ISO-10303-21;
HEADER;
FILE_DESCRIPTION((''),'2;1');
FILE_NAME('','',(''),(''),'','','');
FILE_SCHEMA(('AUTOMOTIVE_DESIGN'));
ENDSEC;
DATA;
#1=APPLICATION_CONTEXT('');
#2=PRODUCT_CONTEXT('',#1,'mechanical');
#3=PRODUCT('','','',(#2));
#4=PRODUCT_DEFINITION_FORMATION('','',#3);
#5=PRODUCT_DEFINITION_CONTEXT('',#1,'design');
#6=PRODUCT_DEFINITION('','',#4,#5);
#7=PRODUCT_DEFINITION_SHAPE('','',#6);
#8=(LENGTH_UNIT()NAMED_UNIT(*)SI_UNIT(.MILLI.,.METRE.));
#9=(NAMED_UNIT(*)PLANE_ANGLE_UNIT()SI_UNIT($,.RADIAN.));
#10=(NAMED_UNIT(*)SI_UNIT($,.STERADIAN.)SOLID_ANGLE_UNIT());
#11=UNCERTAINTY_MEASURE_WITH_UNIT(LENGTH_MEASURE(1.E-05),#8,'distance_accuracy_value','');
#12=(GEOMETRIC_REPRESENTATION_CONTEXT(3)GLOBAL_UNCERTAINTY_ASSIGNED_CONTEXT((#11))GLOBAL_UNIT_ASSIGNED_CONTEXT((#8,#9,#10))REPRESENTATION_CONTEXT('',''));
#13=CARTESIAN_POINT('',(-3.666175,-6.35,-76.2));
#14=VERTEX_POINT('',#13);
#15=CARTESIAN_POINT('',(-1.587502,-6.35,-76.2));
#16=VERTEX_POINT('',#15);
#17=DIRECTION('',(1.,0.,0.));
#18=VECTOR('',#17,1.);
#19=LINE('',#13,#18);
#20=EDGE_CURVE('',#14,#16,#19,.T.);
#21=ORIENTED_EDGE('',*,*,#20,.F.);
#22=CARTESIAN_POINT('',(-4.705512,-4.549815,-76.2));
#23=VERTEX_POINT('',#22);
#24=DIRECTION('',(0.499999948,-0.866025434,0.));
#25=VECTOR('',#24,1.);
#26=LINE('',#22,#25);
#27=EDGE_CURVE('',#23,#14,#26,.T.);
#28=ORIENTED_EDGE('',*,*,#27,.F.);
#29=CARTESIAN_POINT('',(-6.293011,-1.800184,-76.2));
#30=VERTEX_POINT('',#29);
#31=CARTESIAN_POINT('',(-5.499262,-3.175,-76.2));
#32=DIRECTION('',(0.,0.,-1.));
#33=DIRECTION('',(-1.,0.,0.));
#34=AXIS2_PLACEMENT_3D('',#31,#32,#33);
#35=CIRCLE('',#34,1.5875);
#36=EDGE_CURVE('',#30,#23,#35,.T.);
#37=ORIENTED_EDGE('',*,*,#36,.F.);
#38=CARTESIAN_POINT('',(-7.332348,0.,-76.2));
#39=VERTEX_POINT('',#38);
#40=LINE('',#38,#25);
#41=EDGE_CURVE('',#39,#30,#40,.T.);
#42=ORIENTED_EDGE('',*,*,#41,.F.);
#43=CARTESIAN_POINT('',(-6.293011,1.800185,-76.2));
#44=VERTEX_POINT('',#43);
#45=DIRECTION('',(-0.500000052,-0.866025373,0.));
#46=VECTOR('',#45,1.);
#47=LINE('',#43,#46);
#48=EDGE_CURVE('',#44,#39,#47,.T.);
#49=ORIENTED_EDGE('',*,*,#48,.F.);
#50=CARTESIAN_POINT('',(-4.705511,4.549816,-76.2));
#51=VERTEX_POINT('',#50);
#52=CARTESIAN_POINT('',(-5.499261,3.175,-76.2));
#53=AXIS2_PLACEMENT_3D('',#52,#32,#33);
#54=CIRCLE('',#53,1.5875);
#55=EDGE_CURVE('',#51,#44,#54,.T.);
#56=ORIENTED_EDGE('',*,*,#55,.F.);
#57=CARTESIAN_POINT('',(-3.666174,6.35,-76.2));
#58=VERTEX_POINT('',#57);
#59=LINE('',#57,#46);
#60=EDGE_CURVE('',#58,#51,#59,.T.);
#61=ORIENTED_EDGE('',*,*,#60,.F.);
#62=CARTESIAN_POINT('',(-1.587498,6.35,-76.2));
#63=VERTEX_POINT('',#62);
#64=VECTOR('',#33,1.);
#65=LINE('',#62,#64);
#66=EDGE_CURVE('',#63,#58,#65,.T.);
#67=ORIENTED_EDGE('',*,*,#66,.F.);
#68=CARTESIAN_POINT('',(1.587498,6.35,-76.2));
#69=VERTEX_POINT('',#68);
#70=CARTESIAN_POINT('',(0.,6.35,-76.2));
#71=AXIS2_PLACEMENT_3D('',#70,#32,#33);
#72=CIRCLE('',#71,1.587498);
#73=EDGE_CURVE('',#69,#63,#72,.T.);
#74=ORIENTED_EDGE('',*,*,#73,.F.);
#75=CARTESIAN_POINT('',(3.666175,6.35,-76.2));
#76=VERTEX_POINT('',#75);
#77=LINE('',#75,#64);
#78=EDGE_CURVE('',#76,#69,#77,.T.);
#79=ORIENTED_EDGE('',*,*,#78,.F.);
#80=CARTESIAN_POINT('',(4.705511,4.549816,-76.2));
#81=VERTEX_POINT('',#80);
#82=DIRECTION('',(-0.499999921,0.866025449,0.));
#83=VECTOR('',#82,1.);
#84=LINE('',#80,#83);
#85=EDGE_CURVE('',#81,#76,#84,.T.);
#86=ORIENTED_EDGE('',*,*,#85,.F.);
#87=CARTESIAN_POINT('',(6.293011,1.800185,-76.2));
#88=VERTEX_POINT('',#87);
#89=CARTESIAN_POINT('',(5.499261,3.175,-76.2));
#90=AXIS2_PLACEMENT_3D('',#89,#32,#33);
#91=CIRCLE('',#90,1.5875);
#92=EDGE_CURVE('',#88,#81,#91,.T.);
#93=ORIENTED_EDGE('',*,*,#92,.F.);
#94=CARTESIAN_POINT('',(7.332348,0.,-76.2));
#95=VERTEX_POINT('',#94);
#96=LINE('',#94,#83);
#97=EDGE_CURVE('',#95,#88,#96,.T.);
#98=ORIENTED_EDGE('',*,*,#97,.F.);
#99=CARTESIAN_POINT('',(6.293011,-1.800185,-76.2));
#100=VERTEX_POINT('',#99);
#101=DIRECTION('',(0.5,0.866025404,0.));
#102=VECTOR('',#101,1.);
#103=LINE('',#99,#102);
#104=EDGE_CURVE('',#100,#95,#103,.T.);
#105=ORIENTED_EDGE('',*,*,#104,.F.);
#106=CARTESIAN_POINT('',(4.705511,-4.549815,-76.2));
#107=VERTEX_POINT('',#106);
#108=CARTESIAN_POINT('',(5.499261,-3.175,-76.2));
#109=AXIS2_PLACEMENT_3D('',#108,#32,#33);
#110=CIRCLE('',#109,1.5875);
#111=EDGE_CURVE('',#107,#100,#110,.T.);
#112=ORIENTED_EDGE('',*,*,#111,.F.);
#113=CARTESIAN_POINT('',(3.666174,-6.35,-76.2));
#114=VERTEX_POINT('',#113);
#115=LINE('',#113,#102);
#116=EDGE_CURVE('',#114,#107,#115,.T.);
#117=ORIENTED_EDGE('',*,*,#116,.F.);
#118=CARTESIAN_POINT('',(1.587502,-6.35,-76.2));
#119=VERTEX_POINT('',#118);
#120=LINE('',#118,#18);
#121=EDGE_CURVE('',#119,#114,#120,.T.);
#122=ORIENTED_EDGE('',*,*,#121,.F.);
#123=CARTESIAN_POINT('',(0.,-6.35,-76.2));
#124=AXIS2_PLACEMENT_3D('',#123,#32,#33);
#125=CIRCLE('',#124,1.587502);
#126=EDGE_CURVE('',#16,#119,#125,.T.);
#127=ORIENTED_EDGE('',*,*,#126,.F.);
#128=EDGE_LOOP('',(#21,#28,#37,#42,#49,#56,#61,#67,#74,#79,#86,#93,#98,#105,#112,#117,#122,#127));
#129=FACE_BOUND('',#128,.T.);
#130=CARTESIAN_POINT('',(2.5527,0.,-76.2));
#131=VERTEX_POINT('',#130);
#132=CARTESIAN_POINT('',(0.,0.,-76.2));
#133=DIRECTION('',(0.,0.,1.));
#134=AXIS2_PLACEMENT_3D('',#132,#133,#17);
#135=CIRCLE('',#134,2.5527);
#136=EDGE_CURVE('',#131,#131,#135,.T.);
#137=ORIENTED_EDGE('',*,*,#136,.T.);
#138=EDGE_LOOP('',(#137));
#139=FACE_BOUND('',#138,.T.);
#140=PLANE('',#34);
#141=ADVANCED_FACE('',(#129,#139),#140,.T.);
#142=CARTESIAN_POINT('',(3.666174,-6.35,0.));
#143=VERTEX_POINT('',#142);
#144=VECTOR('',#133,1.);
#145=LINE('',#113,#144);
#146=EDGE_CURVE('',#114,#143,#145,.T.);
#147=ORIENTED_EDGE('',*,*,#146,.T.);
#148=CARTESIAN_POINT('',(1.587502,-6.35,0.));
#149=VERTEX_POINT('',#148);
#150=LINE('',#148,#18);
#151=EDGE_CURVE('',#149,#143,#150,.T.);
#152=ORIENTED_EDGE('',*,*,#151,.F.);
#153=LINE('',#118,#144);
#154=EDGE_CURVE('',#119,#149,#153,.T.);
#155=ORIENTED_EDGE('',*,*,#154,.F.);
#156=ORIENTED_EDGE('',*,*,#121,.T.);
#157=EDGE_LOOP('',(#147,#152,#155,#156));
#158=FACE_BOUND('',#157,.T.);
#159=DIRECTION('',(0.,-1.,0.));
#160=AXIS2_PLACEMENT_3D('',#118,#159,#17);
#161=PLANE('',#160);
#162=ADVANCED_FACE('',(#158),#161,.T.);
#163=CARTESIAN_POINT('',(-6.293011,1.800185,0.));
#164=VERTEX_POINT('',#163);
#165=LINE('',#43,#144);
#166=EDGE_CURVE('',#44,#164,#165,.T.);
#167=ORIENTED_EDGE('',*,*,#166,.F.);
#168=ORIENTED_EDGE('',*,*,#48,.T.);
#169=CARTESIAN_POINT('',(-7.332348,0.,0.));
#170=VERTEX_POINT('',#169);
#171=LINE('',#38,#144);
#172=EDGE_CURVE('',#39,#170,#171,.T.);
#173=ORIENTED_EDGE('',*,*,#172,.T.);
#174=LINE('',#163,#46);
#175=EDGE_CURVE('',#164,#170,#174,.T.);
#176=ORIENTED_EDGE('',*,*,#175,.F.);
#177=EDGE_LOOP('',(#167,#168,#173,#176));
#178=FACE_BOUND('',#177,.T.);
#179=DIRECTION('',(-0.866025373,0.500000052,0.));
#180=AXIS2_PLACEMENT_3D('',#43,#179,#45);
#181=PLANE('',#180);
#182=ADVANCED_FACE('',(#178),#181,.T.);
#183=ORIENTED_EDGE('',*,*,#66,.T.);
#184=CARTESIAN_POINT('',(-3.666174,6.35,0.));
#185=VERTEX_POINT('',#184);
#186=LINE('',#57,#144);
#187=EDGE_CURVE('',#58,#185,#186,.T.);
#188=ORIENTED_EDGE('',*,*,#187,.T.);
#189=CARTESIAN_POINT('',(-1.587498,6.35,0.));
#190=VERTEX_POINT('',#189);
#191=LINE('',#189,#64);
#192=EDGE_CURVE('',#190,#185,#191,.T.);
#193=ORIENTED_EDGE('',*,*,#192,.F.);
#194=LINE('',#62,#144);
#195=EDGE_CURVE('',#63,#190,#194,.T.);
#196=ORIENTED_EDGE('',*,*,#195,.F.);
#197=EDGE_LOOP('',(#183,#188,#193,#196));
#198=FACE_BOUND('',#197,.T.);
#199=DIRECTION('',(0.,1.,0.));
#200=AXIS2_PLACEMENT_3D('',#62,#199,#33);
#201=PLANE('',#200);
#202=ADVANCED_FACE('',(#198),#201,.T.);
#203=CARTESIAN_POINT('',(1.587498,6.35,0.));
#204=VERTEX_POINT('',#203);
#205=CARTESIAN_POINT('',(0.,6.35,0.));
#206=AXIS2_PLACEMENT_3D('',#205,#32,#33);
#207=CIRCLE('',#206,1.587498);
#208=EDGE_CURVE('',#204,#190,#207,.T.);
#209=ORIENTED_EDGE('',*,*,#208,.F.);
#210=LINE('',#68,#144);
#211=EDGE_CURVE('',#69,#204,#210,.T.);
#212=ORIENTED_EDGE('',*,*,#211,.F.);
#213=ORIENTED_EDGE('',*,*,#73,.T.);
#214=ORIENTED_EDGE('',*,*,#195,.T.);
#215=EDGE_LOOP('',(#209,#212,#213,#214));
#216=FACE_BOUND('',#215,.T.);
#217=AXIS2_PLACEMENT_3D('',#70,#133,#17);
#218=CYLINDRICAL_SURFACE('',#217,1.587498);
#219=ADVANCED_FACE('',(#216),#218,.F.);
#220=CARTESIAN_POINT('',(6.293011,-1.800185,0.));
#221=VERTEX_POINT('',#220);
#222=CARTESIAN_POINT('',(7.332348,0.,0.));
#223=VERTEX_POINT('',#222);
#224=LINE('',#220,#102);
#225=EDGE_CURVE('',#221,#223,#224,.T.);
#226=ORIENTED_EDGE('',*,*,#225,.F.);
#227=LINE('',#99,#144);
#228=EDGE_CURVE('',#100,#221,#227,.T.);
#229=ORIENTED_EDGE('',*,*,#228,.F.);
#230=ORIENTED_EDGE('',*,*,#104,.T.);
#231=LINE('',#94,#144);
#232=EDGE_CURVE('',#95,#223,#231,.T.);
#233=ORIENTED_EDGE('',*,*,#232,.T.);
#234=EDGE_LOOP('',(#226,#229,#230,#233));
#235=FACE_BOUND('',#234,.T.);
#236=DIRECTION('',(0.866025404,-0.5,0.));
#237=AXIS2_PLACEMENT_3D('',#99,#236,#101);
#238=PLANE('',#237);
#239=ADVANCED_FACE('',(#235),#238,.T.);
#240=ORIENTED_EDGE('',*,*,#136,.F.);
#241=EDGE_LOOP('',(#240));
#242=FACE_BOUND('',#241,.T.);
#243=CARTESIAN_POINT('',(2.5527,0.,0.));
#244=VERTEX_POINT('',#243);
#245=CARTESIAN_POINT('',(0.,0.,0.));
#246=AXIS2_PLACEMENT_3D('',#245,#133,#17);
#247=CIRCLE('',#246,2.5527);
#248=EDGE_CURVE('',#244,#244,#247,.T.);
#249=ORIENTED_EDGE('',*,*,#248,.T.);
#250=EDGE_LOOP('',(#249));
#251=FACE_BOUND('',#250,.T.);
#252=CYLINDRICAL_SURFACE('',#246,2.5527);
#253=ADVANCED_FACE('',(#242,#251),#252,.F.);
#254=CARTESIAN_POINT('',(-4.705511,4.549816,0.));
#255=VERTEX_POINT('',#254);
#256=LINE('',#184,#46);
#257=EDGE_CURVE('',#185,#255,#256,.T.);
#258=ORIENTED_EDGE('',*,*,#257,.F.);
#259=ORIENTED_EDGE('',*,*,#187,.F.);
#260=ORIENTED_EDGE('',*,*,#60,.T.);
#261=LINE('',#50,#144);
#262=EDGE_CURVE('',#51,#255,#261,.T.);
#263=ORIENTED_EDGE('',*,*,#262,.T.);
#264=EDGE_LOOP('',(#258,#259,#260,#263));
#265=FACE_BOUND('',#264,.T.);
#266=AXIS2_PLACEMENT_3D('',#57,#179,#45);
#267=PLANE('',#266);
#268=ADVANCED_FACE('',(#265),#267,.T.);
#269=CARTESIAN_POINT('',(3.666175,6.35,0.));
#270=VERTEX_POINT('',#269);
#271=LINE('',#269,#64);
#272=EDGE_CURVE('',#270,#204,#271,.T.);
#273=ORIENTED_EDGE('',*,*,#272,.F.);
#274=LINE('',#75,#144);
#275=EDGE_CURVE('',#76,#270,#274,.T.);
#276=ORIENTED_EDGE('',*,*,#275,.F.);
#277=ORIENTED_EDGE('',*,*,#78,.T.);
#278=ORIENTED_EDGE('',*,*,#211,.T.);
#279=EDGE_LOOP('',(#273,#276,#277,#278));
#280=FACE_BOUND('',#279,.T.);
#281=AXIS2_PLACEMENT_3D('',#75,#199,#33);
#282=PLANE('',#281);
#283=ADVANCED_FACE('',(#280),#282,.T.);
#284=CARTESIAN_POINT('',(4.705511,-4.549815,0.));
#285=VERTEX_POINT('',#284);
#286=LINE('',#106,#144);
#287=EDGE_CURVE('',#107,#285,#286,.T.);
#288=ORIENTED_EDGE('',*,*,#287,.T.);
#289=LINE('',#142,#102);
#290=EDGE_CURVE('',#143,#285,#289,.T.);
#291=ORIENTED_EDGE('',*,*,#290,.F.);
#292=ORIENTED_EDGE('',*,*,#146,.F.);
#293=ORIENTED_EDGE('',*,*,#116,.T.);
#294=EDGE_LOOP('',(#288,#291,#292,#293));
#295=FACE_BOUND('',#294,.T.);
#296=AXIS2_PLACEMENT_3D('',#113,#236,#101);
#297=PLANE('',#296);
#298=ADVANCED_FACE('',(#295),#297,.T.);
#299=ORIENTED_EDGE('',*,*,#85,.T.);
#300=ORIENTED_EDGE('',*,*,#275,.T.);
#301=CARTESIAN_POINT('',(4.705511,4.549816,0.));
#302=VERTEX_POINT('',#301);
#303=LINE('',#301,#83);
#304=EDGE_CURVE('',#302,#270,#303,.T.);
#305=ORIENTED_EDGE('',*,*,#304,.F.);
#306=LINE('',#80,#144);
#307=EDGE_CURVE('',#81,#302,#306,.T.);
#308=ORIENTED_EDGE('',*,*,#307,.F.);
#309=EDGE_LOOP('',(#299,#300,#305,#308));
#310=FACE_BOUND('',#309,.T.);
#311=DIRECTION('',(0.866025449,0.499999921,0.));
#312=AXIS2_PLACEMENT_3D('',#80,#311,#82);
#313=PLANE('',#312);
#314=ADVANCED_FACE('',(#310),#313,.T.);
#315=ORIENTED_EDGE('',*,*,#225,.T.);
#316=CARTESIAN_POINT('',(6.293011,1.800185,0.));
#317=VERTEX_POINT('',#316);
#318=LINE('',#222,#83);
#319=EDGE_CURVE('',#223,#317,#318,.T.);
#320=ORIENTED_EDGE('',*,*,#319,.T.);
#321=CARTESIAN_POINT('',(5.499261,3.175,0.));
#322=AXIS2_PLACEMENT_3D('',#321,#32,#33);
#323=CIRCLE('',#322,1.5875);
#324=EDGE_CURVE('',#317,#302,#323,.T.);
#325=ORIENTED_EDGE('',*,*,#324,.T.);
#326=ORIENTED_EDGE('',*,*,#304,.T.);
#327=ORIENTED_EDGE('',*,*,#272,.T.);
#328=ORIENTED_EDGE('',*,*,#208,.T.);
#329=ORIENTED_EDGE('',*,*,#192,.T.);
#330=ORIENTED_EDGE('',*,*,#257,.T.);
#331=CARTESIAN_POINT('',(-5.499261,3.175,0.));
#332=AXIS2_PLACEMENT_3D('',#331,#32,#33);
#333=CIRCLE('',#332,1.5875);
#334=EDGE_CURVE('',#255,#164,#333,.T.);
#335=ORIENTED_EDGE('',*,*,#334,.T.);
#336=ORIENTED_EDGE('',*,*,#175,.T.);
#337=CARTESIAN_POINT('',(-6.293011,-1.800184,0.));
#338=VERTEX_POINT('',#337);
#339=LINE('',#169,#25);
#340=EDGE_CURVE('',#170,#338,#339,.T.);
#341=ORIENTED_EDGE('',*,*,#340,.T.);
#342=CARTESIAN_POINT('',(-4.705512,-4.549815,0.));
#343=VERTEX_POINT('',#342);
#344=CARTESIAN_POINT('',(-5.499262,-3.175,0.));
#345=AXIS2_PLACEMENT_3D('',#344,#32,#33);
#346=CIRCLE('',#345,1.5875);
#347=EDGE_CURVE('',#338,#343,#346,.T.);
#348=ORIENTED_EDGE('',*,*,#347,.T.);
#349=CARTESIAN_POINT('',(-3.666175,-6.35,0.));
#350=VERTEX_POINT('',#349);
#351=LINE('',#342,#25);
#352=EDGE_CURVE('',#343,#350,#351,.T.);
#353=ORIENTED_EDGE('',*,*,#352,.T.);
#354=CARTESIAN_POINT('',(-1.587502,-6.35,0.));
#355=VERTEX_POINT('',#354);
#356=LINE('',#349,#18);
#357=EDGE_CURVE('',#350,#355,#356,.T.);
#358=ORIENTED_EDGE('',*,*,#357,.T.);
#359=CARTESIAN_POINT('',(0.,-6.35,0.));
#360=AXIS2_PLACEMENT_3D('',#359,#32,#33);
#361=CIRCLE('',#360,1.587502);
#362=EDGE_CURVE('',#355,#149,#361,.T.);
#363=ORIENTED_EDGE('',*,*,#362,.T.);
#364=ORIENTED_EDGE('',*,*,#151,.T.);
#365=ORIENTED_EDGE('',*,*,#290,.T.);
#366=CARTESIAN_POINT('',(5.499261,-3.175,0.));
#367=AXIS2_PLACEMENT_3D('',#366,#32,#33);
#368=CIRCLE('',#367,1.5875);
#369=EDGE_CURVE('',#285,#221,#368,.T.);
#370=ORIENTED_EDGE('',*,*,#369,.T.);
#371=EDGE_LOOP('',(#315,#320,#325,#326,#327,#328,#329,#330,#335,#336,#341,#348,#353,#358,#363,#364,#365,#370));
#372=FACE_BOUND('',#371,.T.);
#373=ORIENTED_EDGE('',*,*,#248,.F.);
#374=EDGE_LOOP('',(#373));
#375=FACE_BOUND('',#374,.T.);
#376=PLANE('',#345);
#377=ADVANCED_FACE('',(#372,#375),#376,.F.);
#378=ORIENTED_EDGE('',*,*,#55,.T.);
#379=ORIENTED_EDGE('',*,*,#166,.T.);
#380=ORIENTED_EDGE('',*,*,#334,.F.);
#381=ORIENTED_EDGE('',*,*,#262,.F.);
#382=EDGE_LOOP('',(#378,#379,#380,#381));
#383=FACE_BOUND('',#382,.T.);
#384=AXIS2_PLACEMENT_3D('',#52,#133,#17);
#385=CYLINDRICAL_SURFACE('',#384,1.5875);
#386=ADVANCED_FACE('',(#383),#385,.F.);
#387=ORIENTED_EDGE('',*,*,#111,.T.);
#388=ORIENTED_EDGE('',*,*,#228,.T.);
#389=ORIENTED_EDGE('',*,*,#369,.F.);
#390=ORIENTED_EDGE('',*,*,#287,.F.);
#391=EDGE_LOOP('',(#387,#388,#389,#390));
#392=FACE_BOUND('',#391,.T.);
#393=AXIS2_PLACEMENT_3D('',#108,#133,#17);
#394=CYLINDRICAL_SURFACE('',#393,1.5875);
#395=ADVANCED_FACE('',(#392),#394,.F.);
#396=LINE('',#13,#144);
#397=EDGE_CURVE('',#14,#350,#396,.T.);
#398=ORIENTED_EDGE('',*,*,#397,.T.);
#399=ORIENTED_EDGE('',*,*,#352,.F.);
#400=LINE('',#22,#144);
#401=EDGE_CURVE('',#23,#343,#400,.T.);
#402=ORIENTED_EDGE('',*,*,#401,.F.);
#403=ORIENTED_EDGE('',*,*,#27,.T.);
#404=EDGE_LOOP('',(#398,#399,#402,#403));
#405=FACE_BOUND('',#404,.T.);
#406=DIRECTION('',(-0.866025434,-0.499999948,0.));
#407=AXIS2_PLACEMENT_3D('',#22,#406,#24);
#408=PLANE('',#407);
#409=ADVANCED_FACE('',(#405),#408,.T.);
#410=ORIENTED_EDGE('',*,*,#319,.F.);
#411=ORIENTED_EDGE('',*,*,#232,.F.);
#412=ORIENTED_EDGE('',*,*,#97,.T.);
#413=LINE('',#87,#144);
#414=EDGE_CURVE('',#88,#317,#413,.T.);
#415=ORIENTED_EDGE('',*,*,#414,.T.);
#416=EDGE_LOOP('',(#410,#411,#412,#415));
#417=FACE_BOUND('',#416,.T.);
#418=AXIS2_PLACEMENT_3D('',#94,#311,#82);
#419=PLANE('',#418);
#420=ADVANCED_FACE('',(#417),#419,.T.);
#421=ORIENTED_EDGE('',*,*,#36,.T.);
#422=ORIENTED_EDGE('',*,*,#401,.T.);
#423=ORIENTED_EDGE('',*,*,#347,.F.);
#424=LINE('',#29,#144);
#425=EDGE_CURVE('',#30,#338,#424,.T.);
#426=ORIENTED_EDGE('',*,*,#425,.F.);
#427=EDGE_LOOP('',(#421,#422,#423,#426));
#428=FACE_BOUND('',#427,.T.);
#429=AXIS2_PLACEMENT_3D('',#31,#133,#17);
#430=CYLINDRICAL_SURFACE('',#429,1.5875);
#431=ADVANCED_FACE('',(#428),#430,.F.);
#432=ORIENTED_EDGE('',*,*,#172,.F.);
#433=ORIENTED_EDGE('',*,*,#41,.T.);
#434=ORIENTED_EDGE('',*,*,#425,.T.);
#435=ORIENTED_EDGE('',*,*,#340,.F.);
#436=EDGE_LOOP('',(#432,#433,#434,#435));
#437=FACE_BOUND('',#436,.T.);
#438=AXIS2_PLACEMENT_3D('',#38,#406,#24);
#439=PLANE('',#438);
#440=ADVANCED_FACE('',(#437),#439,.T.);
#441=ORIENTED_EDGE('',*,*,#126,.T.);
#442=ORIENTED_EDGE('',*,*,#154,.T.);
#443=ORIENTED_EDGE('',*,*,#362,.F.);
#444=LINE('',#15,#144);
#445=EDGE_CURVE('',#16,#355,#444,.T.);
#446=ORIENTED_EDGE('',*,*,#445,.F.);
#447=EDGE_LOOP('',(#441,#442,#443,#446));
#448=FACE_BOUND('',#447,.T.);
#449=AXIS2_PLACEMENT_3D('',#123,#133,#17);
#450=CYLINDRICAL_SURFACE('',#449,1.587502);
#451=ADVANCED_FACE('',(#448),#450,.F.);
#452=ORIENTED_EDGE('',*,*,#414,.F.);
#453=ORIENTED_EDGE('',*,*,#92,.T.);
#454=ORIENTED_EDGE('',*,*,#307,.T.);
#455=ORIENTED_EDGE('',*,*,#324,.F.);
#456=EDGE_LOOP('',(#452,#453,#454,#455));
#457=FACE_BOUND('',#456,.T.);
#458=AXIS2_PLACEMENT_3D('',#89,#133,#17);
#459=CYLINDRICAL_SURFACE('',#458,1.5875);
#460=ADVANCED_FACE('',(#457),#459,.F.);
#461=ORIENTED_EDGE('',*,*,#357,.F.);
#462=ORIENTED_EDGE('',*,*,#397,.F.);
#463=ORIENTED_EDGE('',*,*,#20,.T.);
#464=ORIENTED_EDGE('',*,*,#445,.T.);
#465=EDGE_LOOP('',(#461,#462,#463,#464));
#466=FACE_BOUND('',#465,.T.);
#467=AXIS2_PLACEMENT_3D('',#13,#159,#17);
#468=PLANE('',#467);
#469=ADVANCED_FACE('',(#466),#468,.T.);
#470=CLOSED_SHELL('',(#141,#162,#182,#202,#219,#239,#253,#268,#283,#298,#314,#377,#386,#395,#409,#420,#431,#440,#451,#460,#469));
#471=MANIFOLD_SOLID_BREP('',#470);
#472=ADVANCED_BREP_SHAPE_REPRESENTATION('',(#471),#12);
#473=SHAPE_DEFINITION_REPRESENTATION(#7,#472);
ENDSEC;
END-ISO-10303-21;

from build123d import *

# Parameters (mm, degrees)
BOSS_EXTRUDE1_DEPTH             = 76.2
F_1_4_20_START                  = -76.2
F_1_4_20_TAPPED_HOLE2_OUTLINE_R = 2.5527
F_1_4_20_TAPPED_HOLE2_DEPTH     = 76.2


# Read off the part's stored shape, not the designer's step: 1/4-20 Tapped Hole2
with BuildPart() as part:
    # Sketch1 → Boss-Extrude1 (new body)
    with BuildSketch(Plane.XY):
        with BuildLine():
            Line((-4.70551159, -4.549815043), (-3.666174521, -6.349999904))
            Line((-3.666174521, -6.349999904), (-1.587501923, -6.349999904))
            ThreePointArc((-1.587501923, -6.349999904), (-3.85e-07, -4.762498365), (1.587501923, -6.349999904))
            Line((1.587501923, -6.349999904), (3.666173825, -6.349999904))
            Line((3.666173825, -6.349999904), (4.705510929, -4.549815232))
            ThreePointArc((4.705510929, -4.549815232), (4.124445601, -2.381249904), (6.293010929, -1.800184575))
            Line((6.293010929, -1.800184575), (7.332348034, 9.6e-08))
            Line((7.332348034, 9.6e-08), (6.293011178, 1.800184715))
            ThreePointArc((6.293011178, 1.800184715), (4.124445902, 2.381250241), (4.705511428, 4.549815516))
            Line((4.705511428, 4.549815516), (3.666174521, 6.350000222))
            Line((3.666174521, 6.350000222), (1.587498077, 6.350000222))
            ThreePointArc((1.587498077, 6.350000222), (3.85e-07, 4.76250253), (-1.587498077, 6.350000222))
            Line((-1.587498077, 6.350000222), (-3.666173825, 6.350000222))
            Line((-3.666173825, 6.350000222), (-4.705511038, 4.549815614))
            ThreePointArc((-4.705511038, 4.549815614), (-4.124445841, 2.38125025), (-6.293011205, 1.800185053))
            Line((-6.293011205, 1.800185053), (-7.332348419, 4.44e-07))
            Line((-7.332348419, 4.44e-07), (-6.293011423, -1.80018429))
            ThreePointArc((-6.293011423, -1.80018429), (-4.12444613, -2.38124975), (-4.70551159, -4.549815043))
        make_face()
    extrude(amount=-BOSS_EXTRUDE1_DEPTH)

    # 1/4-20 Tapped Hole2 outline → 1/4-20 Tapped Hole2 (cut)
    with BuildSketch(Plane.XY.offset(F_1_4_20_START)):
        Circle(F_1_4_20_TAPPED_HOLE2_OUTLINE_R)
    extrude(amount=F_1_4_20_TAPPED_HOLE2_DEPTH, mode=Mode.SUBTRACT)


solid = part.part
